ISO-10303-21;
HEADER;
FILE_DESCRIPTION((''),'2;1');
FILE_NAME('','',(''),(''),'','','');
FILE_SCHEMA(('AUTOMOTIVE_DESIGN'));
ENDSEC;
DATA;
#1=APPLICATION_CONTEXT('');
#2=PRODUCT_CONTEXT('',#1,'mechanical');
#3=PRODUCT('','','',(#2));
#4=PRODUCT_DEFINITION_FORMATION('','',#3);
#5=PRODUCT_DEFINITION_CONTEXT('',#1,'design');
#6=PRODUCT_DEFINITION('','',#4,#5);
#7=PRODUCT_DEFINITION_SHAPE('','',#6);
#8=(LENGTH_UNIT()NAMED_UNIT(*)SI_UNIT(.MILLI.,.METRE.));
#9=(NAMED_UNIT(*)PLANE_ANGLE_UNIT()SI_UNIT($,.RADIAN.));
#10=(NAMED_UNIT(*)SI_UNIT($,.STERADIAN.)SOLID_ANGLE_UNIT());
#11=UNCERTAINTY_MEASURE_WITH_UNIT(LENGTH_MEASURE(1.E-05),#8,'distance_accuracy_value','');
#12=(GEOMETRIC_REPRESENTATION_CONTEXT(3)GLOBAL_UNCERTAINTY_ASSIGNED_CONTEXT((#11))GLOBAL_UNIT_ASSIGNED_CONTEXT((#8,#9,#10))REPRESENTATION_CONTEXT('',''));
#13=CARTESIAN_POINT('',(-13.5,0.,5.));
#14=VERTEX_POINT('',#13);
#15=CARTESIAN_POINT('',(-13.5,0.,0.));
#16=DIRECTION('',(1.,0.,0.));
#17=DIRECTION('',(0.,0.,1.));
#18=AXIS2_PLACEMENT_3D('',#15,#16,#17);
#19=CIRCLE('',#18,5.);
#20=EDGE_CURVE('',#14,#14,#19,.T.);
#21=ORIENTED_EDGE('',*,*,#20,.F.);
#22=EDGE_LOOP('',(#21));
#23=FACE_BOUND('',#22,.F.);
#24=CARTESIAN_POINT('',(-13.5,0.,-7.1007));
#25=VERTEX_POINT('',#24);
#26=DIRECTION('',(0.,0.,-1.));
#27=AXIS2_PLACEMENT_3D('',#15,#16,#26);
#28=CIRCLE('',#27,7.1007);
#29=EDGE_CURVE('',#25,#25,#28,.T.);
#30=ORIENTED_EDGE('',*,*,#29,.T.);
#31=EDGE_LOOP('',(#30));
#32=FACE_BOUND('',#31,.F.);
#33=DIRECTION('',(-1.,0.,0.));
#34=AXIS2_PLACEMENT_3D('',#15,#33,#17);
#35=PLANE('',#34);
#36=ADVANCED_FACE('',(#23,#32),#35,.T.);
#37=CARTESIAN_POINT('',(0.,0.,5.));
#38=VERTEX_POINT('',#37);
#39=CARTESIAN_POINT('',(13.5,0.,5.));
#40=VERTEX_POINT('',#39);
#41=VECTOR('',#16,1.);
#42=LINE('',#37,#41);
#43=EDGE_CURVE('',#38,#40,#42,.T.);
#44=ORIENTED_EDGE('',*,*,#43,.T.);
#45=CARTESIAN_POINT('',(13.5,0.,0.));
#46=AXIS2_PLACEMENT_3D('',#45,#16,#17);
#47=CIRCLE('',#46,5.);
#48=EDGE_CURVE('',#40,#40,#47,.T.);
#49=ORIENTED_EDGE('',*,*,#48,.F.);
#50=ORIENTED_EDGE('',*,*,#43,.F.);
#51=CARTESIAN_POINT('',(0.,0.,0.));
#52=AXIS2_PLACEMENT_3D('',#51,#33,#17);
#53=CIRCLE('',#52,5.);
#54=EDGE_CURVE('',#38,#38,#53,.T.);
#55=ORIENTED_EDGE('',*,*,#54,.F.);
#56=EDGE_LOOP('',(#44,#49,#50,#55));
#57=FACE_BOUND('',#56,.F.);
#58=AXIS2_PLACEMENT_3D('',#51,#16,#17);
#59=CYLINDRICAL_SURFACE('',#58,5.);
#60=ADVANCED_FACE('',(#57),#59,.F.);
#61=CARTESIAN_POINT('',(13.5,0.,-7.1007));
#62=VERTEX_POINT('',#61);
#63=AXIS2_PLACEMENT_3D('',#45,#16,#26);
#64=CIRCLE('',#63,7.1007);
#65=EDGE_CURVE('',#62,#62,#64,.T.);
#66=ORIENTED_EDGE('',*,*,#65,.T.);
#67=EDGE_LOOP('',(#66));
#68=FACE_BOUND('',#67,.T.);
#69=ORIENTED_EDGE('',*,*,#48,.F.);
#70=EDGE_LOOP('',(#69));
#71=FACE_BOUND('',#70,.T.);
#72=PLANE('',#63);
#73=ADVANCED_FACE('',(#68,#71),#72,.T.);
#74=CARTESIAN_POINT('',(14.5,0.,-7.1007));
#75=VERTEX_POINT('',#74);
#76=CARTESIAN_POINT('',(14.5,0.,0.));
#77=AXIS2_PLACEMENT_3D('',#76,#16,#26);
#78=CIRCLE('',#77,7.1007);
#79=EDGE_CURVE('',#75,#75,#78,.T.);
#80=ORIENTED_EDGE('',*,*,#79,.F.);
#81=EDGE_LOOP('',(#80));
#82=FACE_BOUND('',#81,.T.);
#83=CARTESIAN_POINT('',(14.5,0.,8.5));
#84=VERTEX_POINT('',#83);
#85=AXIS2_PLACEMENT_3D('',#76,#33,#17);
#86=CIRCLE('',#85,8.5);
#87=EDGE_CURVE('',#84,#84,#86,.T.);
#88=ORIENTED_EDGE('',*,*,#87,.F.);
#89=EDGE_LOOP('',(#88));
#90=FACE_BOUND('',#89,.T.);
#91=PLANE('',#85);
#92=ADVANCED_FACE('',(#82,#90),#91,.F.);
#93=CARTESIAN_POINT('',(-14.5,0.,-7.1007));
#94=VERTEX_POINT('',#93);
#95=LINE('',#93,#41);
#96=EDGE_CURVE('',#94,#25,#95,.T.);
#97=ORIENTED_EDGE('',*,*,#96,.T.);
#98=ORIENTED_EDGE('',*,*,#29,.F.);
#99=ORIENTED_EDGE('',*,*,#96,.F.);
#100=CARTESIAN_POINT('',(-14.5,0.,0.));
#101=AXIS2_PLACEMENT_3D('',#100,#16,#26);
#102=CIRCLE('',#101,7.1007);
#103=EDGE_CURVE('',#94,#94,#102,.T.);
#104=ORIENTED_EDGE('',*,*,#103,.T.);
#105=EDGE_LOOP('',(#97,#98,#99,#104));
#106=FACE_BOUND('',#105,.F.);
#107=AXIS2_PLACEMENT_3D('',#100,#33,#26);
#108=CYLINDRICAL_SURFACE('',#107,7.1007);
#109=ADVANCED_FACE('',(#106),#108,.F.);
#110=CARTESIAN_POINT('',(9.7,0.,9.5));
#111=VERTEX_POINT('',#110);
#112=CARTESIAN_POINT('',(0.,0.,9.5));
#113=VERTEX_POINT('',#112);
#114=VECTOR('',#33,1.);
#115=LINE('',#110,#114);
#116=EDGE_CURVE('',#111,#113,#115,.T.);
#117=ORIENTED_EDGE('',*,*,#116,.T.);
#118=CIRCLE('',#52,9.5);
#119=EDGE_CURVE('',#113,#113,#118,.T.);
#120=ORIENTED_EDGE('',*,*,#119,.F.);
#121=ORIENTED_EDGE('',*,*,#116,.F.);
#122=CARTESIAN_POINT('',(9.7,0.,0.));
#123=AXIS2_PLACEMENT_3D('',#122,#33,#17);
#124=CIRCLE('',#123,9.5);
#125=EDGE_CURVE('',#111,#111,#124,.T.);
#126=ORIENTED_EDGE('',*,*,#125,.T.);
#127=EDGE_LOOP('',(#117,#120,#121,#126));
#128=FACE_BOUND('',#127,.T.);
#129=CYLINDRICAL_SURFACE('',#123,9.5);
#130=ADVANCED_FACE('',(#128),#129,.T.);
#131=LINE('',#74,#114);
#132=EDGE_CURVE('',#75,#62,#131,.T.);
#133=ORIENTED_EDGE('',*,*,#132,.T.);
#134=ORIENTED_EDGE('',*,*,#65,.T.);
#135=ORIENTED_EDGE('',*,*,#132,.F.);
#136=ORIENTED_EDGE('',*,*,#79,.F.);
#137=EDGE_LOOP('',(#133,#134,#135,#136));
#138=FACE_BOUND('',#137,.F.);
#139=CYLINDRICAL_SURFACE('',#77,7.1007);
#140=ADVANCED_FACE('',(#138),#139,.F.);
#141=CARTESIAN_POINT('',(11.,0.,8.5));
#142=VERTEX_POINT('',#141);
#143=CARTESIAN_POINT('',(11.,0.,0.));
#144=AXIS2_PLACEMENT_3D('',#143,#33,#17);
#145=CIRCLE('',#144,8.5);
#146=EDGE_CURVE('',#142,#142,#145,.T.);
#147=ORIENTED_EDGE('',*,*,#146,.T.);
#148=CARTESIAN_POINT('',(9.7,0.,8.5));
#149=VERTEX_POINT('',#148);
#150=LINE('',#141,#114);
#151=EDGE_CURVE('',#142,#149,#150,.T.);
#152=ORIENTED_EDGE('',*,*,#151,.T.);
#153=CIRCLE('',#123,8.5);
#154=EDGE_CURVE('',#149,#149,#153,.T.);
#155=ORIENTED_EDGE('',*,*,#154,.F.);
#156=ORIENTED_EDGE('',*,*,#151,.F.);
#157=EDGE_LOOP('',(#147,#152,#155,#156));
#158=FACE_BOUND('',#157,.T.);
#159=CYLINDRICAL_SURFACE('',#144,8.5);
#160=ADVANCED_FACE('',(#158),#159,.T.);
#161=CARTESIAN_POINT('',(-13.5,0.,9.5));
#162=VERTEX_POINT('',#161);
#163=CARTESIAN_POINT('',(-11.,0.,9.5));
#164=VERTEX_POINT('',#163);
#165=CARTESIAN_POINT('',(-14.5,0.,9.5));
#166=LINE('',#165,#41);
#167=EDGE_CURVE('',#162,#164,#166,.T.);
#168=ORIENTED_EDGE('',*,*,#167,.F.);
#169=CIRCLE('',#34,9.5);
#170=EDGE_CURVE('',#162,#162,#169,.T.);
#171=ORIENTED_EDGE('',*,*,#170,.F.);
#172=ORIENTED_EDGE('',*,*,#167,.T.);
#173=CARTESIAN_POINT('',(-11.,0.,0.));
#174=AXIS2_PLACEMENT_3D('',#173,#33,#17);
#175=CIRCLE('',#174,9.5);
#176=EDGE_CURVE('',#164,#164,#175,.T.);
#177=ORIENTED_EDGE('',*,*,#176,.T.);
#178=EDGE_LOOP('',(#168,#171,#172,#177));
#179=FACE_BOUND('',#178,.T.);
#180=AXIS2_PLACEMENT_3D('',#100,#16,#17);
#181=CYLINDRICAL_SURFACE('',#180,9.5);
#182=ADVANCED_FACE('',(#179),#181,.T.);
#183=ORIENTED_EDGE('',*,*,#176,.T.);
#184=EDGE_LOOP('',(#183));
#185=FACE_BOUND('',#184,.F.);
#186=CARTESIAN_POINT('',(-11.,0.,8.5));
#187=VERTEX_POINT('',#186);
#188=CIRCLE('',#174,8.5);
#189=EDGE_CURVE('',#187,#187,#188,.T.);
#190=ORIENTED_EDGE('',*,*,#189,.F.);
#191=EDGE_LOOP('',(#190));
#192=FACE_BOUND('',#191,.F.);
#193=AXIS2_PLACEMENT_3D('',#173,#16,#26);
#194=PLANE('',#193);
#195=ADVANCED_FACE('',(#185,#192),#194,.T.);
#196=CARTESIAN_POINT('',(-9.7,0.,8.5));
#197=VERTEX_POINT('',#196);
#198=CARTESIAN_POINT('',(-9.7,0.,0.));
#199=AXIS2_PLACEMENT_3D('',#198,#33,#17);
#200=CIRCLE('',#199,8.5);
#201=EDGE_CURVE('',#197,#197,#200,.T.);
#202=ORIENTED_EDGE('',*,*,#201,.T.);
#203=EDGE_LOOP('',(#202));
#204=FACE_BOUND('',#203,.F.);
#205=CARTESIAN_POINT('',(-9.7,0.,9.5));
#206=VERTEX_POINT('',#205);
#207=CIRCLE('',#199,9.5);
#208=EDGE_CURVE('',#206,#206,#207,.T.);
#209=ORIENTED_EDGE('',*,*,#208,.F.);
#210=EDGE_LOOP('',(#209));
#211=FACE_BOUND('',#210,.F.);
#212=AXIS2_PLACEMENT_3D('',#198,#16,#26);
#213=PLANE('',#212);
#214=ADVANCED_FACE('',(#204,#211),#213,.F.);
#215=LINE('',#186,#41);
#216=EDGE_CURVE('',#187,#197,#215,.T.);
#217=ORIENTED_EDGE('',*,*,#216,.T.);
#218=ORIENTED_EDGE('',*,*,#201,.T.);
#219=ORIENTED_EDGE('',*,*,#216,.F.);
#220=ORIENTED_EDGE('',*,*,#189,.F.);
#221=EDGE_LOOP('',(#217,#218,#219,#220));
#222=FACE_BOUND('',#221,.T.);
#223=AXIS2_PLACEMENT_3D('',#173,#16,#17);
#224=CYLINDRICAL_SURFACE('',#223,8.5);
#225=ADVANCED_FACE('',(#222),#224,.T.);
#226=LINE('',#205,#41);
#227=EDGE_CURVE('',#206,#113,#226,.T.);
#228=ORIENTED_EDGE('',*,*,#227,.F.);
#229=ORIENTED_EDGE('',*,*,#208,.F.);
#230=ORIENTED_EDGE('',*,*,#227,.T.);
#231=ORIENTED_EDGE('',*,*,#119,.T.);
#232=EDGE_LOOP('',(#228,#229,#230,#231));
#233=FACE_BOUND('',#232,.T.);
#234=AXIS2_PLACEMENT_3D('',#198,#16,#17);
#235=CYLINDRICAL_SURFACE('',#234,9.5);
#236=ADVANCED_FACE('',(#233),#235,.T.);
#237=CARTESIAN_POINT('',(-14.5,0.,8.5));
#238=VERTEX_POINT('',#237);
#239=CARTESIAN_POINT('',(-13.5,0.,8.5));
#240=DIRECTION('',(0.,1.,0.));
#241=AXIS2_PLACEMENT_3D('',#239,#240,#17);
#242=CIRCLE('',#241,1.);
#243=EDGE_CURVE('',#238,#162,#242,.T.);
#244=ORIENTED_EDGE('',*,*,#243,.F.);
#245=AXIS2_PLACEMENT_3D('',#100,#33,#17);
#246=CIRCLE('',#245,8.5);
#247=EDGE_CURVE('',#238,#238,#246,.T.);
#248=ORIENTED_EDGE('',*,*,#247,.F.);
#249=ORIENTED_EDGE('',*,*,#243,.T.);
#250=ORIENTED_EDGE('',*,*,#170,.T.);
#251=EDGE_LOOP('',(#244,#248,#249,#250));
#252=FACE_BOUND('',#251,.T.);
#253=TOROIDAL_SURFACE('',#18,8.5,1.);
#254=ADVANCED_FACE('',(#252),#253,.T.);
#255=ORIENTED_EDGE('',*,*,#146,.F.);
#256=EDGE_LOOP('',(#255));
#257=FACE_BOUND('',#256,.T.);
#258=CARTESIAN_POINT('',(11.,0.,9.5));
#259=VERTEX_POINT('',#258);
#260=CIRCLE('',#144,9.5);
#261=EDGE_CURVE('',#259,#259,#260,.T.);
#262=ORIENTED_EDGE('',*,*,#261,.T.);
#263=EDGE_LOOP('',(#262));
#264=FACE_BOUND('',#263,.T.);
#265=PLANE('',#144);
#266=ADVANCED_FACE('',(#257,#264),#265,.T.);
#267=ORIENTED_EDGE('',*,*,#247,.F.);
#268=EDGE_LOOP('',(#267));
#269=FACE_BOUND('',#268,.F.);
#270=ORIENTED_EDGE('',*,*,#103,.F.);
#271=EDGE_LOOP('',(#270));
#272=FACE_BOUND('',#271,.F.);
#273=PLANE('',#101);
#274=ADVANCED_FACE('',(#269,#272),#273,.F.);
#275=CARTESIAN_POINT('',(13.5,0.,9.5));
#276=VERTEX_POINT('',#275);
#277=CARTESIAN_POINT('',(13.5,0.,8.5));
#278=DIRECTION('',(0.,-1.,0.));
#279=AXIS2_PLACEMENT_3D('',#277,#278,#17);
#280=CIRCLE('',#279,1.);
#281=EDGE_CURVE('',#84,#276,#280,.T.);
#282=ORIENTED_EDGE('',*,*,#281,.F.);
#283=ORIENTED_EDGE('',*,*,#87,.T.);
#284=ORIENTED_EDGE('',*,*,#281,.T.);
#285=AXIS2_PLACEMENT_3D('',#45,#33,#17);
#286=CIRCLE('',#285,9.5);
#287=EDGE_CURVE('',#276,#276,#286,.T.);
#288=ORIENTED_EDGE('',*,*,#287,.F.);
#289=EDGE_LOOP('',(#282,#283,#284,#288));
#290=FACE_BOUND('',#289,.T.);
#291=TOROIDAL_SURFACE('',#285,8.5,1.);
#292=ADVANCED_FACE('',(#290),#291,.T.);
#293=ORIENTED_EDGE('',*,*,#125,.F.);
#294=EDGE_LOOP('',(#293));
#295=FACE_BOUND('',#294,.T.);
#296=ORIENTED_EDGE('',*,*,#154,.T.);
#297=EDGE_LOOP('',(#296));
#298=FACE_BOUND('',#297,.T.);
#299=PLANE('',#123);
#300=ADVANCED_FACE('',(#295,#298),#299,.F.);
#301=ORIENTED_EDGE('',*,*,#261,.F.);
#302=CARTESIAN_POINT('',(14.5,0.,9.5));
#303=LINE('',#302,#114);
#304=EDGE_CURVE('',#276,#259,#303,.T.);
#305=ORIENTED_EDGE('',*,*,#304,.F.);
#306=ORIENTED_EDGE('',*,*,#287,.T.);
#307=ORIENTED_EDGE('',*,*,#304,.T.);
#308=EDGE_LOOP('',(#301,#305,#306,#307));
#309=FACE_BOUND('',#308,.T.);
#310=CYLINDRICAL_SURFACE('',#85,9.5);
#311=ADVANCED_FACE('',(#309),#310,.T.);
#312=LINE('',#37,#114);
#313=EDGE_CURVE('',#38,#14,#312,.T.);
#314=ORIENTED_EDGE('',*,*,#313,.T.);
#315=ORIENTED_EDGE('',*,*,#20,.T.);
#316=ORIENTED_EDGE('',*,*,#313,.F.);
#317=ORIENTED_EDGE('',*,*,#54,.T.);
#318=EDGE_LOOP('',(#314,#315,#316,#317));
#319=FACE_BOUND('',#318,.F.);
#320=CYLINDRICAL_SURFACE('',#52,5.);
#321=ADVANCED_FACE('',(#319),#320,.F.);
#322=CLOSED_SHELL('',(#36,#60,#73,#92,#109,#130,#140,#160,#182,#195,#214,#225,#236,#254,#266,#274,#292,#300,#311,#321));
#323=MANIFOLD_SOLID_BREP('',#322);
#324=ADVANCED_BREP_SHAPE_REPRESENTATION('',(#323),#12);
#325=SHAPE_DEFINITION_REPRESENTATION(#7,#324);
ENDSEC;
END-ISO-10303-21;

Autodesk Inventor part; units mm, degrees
ref_plane "YZ Plane" through (0, 0, 0) normal (1, 0, 0) x (0, 1, 0)
ref_plane "XZ Plane" through (0, 0, 0) normal (0, 1, 0) x (-1, 0, 0)
ref_plane "XY Plane" through (0, 0, 0) normal (0, 0, 1) x (1, 0, 0)
sketch "Schizzo1" plane through (0, 0, 0) normal (0, 1, 0) x (-1, 0, 0)
  line L0 (-14.5, 5) -> (-14.5, 9.5)
  line L1 (-14.5, 9.5) -> (-11, 9.5)
  line L2 (-11, 9.5) -> (-11, 8.5)
  line L3 (-11, 8.5) -> (-9.7, 8.5)
  line L4 (-9.7, 8.5) -> (-9.7, 9.5)
  line L5 (-9.7, 9.5) -> (0, 9.5)
  line L6 (0, 9.5) -> (0, 5)
  line L7 (0, 5) -> (-14.5, 5)
  line L8 (0, 0) -> (5.7518, 0)
  dimension "d0" = 10
  dimension "d2" = 19
  dimension "d3" = 14.5
  dimension "d4" = 11
  dimension "d5" = 1.3
  dimension "d6" = 17
revolve "Rivoluzione1" add sketch "Schizzo1" angle 360 about axis through (0, 0, 0) along (-1, 0, 0)
fillet "Raccordo1" radius 1 1 edges at (14.5, 0, -9.5)
sketch "Schizzo2" plane through (14.5, 0, 0) normal (1, 0, 0) x (0, 0, -1)
  circle A0 centre (0, 0) radius 8.5 projected
  circle A1 centre (0, 0) radius 7.1007
extrude "Estrusione2" cut sketch "Schizzo2" against normal blind 1 contours A1
mirror "Specchio1" about plane through (0, 0, 7.25) normal (-1, 0, 0)
properties part number "LM10UU"
